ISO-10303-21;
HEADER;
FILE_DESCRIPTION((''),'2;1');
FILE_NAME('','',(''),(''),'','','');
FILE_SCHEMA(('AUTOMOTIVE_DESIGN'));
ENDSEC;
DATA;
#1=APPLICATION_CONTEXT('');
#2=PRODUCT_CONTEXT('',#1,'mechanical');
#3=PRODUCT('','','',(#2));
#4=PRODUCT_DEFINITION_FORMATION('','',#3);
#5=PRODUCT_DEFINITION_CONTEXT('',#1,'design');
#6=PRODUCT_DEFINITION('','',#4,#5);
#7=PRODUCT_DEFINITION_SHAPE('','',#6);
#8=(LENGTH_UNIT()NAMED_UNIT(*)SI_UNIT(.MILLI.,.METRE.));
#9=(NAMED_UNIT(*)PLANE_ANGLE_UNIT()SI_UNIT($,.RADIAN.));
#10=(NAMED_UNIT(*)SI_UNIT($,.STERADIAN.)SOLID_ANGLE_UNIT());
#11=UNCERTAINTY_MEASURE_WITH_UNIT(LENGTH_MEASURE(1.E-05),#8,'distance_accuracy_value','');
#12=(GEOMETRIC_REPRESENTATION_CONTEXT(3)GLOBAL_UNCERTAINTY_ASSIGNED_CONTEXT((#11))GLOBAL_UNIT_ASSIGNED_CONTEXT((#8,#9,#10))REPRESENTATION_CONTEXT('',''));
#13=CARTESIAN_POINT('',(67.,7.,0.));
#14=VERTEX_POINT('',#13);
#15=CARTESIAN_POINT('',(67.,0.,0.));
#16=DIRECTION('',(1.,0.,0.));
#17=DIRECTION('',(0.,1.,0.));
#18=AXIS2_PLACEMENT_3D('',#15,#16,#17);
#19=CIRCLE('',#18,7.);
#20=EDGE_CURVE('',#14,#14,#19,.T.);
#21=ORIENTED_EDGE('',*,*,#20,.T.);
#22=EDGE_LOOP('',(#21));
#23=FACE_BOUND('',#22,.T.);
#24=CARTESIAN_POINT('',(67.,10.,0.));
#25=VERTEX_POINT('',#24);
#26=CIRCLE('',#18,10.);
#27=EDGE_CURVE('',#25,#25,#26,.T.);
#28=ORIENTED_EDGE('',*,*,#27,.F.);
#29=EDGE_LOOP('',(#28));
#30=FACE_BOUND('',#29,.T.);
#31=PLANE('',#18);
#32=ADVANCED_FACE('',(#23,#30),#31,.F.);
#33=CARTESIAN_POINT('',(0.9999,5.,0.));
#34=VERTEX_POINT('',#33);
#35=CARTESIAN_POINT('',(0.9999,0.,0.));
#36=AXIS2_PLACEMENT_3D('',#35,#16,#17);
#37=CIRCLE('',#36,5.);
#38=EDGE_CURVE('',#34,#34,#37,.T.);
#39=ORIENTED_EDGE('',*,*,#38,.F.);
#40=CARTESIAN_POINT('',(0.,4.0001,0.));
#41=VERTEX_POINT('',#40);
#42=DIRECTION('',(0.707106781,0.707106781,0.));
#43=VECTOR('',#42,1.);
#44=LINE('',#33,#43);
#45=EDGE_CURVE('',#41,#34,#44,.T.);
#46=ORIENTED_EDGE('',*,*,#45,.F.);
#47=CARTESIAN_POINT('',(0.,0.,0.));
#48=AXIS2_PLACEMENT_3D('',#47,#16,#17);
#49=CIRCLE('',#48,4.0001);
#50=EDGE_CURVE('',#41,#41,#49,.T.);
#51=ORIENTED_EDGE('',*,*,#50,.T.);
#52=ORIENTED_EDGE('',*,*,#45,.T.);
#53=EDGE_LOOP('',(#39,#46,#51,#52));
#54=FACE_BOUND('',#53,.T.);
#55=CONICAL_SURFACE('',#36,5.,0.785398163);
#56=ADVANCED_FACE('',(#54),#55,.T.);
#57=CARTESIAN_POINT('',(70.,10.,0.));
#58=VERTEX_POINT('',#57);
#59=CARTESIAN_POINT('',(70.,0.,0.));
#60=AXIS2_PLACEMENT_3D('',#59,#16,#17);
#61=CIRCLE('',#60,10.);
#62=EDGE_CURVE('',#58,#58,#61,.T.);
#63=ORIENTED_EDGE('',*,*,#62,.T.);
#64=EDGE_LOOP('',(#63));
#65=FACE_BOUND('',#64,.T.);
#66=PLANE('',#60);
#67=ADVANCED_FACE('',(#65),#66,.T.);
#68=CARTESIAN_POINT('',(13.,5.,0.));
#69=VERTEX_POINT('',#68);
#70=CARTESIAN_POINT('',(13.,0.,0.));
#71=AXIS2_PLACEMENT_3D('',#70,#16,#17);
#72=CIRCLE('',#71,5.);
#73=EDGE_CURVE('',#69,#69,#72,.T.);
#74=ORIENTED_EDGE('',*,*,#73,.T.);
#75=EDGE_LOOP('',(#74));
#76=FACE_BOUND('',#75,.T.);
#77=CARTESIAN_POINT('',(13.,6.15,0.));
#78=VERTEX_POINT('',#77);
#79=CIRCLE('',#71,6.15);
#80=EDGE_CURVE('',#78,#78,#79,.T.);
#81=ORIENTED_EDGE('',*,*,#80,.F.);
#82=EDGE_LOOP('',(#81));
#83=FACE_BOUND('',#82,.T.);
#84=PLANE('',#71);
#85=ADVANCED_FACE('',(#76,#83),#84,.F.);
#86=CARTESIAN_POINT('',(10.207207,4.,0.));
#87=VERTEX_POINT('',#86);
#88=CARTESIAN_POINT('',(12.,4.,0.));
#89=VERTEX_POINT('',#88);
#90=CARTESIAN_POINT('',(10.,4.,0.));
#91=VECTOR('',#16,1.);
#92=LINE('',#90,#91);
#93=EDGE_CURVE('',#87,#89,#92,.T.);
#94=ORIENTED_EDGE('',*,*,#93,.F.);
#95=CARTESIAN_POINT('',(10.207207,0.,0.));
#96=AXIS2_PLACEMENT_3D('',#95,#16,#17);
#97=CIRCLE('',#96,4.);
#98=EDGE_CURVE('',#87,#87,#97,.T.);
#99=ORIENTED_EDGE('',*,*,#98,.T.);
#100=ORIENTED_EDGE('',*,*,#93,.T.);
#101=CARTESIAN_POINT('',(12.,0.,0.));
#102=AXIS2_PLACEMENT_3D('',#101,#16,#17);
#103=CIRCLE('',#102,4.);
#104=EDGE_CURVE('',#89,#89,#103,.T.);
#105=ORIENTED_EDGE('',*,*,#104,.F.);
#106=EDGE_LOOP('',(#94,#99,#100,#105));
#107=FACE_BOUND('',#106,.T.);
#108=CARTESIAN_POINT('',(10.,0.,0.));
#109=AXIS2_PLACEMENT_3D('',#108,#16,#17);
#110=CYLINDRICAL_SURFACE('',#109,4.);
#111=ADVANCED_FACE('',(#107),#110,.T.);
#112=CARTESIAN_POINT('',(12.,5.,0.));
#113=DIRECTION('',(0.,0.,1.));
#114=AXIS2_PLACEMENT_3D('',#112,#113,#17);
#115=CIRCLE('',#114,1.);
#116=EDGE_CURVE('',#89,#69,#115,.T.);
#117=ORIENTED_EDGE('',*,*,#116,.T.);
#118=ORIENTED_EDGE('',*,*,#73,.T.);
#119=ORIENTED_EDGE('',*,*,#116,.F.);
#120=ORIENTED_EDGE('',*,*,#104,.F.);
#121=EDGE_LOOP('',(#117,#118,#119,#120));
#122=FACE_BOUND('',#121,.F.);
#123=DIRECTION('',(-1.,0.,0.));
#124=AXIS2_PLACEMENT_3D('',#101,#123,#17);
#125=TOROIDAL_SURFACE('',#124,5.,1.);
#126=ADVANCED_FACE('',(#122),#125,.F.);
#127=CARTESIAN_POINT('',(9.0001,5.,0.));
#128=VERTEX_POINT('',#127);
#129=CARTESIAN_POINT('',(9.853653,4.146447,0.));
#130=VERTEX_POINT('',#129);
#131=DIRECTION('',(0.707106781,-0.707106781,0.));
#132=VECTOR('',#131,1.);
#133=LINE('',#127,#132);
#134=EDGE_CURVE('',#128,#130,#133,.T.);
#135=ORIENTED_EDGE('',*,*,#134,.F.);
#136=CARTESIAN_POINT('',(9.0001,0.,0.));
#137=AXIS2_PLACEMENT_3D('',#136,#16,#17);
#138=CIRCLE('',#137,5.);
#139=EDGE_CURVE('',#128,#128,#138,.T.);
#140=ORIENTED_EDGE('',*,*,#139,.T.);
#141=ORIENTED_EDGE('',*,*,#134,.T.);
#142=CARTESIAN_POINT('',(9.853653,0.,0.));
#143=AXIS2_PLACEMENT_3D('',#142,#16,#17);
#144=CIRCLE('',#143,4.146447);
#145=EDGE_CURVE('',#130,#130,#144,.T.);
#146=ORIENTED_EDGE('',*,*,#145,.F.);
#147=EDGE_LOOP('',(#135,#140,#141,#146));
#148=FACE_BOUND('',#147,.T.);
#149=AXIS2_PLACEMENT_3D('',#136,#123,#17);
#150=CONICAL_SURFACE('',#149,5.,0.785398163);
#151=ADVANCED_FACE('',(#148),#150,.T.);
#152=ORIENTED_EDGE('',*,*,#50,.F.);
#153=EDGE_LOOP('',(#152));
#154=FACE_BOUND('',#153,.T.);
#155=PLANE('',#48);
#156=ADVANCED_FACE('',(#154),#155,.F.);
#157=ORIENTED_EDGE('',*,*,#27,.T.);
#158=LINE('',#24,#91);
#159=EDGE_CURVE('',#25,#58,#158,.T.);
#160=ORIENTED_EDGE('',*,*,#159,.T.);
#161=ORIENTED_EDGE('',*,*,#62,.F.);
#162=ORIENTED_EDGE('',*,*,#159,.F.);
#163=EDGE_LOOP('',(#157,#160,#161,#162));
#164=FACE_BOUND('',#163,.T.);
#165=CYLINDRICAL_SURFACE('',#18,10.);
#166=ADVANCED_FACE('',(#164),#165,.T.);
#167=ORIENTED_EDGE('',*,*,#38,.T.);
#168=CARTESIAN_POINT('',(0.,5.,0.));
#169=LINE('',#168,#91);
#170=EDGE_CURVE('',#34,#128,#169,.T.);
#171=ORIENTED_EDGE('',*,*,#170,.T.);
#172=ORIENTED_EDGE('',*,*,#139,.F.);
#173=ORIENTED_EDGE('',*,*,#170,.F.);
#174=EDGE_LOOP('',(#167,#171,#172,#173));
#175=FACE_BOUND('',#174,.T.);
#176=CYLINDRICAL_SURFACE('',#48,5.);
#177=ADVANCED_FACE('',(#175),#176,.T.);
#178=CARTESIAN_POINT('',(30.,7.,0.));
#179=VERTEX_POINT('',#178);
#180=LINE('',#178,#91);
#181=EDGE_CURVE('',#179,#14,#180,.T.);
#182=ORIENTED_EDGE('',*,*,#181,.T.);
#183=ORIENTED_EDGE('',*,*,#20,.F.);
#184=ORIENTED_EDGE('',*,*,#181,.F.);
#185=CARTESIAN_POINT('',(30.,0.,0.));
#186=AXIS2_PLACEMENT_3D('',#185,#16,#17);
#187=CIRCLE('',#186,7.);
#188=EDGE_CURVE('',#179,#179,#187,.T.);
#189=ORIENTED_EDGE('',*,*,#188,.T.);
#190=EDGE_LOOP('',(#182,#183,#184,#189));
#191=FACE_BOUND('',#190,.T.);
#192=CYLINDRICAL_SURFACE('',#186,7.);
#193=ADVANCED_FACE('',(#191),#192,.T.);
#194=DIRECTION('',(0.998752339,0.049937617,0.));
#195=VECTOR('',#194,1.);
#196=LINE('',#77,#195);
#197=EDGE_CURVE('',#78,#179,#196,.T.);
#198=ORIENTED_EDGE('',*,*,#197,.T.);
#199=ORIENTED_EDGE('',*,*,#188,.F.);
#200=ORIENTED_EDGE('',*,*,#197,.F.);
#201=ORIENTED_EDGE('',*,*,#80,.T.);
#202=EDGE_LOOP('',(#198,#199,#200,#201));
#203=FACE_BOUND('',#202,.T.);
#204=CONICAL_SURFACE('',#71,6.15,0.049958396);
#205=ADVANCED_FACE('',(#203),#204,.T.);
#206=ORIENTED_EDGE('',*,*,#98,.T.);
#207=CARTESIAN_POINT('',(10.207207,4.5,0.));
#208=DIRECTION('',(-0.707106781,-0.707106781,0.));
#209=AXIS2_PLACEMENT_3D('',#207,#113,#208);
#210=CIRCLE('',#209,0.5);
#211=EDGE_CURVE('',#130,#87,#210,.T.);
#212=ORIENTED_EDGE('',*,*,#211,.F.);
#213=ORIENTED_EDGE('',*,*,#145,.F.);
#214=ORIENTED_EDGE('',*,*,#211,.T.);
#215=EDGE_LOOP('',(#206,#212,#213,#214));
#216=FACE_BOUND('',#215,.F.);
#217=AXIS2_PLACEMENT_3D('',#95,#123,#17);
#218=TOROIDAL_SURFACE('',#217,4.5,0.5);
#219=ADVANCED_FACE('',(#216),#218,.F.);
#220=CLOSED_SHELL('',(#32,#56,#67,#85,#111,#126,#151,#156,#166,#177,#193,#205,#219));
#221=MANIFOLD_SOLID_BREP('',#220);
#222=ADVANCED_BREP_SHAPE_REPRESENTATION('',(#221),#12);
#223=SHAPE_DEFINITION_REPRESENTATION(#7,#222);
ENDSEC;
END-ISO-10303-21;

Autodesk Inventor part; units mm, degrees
ref_plane "YZ Plane" through (0, 0, 0) normal (1, 0, 0) x (0, 1, 0)
ref_plane "XZ Plane" through (0, 0, 0) normal (0, 1, 0) x (-1, 0, 0)
ref_plane "XY Plane" through (0, 0, 0) normal (0, 0, 1) x (1, 0, 0)
sketch "Эскиз1" plane through (0, 0, 0) normal (0, 0, 1) x (1, 0, 0)
  line L0 (0, 0) -> (0, 5)
  line L1 (0, 5) -> (10, 5)
  line L2 (10, 5) -> (10, 4)
  line L3 (10, 4) -> (13, 4)
  line L4 (13, 4) -> (13, 6.15)
  line L5 (13, 6.15) -> (30, 7)
  line L6 (30, 7) -> (67, 7)
  line L7 (67, 7) -> (67, 10)
  line L8 (67, 10) -> (70, 10)
  line L9 (70, 10) -> (70, 0)
  line L10 (0, 0) -> (70, 0)
  dimension "d0" = 10
  dimension "d1" = 12.3
  dimension "d2" = 14
  dimension "d3" = 10
  dimension "d4" = 3
  dimension "d5" = 20
  dimension "d6" = 8
  dimension "d7" = 60
  dimension "d8" = 3
  dimension "d9" = 20
revolve "Вращение1" add sketch "Эскиз1" angle 360 about axis through (0, 0, 0) along (1, 0, 0)
thread "Резьба1" size "M10x1.5" class "6g" standard "ISO Metric profile" length 18
chamfer "Фаска1" distance 1 angle 45 2 edges at (0, -5, 0) (10, -5, 0)
fillet "Сопряжение1" radius 0.5 2 edges at (10, -4.0001, 0) (10, -4, 0)
fillet "Сопряжение2" radius 1 1 edges at (13, -4, 0)
properties part number "Палец_ребрышко"
